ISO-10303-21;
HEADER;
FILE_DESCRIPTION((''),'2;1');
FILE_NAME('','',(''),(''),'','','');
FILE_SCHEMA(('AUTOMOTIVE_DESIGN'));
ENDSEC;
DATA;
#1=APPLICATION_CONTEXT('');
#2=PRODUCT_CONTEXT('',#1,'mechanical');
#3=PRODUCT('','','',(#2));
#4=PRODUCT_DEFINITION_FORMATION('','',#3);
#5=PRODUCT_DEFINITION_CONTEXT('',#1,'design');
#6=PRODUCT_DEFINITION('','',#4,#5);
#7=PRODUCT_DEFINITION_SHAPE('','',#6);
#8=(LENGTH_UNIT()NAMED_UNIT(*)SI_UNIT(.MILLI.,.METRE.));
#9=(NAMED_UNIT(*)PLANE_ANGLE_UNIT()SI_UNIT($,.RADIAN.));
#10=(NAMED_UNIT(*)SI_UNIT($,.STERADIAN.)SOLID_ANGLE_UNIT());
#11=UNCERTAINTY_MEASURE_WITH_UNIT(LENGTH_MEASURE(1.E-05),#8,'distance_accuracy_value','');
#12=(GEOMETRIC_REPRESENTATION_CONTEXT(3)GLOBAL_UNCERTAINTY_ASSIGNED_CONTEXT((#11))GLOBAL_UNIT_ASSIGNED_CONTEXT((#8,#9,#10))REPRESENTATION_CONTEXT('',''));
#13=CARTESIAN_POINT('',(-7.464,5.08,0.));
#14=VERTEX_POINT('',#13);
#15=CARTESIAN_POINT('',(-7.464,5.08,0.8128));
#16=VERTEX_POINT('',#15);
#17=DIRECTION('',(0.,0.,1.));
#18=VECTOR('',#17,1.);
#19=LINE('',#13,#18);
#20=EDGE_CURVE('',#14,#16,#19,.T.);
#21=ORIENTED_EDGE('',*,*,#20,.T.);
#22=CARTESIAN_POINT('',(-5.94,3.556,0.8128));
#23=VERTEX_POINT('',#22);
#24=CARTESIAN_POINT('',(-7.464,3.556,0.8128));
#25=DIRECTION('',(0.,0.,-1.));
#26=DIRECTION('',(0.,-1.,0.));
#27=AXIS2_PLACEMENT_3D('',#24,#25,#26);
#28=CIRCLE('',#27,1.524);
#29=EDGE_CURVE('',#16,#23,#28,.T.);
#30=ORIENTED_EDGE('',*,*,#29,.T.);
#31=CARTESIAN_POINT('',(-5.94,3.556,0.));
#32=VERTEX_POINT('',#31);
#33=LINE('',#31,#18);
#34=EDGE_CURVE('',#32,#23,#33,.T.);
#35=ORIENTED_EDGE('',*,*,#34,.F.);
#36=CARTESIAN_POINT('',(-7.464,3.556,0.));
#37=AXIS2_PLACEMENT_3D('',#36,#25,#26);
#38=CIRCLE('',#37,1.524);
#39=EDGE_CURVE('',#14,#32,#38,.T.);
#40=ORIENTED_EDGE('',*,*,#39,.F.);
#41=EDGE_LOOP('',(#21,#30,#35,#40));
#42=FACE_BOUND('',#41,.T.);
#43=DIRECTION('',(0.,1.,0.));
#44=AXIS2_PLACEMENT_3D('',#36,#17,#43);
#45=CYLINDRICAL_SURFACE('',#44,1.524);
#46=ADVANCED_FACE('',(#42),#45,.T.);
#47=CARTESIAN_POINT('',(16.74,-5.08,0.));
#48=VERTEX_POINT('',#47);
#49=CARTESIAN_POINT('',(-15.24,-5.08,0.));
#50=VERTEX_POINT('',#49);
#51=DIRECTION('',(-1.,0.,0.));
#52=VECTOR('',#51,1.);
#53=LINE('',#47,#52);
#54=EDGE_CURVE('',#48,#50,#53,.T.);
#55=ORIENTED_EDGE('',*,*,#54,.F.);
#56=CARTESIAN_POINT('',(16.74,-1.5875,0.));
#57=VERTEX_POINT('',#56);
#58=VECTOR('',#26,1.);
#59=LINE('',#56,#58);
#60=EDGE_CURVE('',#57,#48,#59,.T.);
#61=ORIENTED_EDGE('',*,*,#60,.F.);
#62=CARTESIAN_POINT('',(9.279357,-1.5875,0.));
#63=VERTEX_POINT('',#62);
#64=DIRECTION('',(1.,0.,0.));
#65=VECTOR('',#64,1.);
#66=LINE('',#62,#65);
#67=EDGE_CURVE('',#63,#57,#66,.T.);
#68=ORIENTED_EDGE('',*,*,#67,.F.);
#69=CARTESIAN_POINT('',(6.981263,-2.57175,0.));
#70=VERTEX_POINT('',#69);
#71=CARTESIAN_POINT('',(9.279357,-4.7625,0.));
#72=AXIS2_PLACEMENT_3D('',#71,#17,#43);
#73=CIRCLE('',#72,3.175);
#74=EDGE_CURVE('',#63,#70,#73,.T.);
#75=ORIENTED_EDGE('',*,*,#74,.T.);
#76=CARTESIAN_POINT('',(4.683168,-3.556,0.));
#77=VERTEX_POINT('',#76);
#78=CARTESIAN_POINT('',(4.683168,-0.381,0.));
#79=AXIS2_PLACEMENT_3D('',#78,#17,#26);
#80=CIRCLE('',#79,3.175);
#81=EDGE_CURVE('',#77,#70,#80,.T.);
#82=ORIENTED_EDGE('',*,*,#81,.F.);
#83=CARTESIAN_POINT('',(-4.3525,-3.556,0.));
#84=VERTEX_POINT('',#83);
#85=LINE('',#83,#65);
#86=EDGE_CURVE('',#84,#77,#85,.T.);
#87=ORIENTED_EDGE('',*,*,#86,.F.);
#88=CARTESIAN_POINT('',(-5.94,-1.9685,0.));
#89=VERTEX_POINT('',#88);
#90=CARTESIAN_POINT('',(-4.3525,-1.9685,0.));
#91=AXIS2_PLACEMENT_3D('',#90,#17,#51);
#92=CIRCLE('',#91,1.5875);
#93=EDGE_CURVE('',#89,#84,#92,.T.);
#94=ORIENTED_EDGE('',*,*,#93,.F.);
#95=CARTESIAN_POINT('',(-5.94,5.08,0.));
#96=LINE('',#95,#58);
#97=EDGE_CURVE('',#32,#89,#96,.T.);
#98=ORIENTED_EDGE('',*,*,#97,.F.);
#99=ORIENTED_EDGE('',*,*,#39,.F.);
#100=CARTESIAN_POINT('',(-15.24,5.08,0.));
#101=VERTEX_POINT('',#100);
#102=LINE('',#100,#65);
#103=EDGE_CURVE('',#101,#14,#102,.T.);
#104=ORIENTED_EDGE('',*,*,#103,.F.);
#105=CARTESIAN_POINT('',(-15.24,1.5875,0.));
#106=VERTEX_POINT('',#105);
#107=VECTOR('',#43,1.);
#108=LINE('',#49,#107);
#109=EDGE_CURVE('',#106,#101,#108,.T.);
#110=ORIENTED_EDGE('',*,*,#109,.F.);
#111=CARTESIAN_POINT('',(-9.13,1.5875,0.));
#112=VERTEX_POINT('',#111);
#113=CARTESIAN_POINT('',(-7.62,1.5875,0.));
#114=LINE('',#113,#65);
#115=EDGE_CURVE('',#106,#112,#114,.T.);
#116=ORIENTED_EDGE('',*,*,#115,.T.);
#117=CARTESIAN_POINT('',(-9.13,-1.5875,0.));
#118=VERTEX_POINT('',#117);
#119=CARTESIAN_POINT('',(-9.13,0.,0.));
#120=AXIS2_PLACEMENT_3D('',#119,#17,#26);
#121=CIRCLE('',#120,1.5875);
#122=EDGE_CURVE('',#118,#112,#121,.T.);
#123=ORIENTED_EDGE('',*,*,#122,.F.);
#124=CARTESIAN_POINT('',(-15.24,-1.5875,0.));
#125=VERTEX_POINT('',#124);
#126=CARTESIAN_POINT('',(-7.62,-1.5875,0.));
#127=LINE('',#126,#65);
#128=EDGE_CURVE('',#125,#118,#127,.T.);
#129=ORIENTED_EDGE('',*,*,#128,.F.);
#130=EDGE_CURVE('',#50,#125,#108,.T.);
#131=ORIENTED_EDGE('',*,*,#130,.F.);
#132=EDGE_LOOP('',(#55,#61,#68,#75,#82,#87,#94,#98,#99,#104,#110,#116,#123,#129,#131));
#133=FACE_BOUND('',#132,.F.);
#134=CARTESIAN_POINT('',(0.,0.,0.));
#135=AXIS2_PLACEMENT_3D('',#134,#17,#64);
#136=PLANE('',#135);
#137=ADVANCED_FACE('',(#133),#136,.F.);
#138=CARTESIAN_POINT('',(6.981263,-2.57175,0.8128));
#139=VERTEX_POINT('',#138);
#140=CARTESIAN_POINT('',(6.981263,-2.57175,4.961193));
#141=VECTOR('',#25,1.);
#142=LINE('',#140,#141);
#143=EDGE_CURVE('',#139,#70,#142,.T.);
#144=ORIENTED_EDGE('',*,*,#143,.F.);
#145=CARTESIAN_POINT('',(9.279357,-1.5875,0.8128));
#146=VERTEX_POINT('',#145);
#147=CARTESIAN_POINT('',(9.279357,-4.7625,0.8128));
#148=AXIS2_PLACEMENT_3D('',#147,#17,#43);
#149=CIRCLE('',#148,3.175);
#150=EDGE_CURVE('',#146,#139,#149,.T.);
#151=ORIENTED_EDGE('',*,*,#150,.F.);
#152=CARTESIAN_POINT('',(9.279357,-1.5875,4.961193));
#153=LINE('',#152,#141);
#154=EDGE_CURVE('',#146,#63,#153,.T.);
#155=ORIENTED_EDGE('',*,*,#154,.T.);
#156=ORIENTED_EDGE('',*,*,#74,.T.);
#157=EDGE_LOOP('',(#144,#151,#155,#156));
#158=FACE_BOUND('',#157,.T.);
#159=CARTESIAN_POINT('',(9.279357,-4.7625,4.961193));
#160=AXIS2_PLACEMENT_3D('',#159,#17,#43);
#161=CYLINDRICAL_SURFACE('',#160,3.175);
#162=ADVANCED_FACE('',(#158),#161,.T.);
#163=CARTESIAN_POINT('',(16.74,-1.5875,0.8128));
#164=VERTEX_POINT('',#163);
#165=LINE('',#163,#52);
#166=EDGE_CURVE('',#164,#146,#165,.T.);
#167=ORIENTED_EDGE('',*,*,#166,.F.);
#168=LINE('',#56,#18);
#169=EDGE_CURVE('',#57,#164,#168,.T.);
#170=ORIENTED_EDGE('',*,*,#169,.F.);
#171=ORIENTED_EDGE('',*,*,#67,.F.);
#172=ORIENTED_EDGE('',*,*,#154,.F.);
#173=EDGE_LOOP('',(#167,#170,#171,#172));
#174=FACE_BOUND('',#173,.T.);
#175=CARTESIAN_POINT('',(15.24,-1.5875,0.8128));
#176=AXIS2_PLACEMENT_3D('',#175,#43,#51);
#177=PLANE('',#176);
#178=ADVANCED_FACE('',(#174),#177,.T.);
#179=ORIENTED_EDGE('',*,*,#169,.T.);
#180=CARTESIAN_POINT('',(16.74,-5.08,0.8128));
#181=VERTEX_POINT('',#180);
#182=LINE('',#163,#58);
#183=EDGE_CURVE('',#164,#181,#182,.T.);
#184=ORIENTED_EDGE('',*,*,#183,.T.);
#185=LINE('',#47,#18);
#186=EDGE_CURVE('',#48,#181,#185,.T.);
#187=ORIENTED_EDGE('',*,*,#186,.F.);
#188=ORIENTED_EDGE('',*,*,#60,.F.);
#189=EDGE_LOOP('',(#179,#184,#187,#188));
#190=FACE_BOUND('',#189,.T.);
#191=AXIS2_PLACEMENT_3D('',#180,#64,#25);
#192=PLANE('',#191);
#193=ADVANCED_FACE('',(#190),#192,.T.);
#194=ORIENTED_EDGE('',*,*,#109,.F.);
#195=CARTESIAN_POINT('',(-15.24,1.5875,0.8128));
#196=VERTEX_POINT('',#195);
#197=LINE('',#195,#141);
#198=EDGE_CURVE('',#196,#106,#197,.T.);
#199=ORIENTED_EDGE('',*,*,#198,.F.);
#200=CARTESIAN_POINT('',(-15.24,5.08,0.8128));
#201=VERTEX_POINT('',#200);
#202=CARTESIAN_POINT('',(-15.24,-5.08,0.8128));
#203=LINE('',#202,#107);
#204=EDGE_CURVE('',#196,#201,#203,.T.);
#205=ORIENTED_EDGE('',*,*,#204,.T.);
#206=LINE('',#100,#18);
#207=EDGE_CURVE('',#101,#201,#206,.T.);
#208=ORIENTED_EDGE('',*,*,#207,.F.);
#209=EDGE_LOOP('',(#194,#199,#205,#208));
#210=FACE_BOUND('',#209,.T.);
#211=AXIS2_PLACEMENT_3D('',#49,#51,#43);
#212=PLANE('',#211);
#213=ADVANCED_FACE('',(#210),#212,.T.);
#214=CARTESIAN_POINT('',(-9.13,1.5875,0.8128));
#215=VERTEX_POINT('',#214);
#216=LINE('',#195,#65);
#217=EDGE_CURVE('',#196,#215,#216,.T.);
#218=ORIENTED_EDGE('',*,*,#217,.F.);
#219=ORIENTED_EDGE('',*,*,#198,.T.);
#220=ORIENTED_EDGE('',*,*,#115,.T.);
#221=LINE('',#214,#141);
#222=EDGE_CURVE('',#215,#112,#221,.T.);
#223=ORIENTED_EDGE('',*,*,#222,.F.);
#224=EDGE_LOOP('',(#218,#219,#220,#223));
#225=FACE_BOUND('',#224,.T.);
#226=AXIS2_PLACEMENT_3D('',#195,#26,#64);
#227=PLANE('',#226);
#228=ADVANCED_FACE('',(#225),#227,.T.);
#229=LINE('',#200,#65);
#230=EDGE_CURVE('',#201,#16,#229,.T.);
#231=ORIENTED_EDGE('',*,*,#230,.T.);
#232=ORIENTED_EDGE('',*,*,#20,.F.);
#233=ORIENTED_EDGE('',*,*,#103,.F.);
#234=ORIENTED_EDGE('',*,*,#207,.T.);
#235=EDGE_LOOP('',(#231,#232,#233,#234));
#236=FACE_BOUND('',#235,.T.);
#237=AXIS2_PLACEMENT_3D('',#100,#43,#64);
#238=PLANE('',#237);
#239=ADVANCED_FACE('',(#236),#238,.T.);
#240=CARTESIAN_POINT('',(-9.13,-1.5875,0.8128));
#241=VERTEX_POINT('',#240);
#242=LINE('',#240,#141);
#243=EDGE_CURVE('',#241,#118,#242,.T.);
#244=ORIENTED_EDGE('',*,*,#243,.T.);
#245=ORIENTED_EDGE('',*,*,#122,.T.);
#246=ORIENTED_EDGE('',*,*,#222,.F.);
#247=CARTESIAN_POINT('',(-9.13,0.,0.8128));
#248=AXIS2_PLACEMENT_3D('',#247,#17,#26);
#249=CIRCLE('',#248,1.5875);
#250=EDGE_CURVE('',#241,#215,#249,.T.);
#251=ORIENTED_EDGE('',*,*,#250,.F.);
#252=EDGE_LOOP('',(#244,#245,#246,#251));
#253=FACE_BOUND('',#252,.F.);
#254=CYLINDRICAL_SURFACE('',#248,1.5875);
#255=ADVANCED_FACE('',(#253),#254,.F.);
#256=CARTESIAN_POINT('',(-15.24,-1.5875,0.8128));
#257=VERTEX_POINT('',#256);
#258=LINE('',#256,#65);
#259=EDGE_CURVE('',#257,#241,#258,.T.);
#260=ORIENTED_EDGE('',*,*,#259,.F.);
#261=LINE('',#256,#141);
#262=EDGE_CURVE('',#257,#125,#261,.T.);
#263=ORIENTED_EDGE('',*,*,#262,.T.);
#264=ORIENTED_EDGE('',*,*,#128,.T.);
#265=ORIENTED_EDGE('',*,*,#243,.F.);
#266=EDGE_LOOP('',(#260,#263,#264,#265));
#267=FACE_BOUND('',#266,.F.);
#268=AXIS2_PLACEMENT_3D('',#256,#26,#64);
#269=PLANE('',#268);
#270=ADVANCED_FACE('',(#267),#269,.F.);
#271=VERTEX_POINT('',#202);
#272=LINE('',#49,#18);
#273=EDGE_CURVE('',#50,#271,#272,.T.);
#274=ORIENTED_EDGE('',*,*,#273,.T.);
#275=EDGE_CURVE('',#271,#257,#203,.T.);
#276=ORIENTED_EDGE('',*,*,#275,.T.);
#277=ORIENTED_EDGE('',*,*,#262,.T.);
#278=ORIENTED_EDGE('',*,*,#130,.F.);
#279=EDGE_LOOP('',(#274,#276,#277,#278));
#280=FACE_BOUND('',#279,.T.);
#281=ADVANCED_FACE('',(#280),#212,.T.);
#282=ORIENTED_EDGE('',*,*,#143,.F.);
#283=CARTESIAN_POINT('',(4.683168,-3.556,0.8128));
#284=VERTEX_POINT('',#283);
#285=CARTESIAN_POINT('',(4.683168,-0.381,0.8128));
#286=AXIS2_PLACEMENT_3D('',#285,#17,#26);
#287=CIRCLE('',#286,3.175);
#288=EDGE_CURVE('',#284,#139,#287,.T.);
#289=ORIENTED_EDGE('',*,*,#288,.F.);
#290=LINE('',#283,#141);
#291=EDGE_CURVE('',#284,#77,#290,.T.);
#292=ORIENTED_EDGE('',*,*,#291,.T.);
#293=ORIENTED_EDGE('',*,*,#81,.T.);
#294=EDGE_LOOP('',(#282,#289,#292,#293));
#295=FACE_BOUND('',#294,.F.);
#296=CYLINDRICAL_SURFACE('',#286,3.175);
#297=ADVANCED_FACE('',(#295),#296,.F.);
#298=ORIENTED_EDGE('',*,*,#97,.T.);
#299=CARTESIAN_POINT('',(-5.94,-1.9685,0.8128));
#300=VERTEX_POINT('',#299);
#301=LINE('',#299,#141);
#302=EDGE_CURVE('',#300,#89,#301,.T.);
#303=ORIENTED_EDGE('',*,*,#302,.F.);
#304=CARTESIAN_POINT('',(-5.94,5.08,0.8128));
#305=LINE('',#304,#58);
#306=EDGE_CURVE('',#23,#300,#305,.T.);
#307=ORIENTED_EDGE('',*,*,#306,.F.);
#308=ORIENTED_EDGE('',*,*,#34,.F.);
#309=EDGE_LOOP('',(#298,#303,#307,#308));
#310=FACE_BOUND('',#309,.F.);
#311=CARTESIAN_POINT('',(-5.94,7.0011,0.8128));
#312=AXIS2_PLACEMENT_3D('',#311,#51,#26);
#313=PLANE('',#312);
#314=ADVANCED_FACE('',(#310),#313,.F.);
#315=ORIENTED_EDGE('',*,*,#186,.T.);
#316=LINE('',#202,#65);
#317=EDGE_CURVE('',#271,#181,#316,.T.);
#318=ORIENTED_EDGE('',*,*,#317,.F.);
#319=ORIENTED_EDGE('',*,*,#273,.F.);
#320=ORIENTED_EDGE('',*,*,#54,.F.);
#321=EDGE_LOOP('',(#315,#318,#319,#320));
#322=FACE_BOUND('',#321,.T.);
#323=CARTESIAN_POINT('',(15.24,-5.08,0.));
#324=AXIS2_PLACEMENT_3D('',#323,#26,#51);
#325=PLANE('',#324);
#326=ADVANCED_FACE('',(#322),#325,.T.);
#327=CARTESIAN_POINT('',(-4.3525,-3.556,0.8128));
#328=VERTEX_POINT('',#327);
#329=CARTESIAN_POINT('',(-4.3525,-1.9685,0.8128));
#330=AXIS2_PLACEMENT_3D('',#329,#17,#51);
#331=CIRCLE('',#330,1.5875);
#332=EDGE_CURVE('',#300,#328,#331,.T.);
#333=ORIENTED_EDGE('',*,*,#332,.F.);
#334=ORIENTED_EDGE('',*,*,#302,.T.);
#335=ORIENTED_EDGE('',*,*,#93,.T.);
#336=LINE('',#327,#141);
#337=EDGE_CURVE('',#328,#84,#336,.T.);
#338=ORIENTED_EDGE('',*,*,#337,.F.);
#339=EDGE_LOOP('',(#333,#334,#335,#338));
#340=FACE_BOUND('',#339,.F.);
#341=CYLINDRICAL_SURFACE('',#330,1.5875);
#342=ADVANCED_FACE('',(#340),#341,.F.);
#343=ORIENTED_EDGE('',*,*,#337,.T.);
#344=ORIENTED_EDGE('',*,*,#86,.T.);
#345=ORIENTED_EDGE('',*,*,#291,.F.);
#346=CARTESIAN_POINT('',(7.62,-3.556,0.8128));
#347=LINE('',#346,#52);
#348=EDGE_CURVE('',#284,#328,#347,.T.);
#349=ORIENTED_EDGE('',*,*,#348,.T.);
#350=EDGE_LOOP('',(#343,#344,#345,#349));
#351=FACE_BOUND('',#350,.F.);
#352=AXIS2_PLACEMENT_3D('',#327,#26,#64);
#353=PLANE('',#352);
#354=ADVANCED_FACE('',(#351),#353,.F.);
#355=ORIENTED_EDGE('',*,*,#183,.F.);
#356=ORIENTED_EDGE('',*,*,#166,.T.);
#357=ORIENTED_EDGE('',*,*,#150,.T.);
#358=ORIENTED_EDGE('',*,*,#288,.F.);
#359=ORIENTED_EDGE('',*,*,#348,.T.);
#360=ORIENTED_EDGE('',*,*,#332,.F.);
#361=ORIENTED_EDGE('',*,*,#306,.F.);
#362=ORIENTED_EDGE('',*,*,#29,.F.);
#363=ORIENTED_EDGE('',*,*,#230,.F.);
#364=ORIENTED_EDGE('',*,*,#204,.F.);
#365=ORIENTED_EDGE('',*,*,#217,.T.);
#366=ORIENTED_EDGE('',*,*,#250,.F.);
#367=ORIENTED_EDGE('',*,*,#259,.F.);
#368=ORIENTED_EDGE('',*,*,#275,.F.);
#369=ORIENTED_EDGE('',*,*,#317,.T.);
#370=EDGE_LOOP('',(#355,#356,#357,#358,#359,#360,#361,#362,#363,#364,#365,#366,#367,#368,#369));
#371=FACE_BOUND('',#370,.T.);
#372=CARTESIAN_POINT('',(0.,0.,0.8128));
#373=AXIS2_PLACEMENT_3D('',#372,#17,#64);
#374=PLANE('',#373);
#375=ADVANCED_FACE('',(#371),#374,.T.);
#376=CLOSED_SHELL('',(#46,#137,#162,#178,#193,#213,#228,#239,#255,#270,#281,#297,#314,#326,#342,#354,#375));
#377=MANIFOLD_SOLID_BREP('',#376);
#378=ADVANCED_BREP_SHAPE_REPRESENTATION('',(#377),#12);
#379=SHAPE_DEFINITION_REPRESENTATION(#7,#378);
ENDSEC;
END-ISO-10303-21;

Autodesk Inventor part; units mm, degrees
ref_plane "YZ Plane" through (0, 0, 0) normal (1, 0, 0) x (0, 1, 0)
ref_plane "XZ Plane" through (0, 0, 0) normal (0, 1, 0) x (-1, 0, 0)
ref_plane "XY Plane" through (0, 0, 0) normal (0, 0, 1) x (1, 0, 0)
sketch "Sketch1" plane through (0, 0, 0) normal (0, 0, 1) x (1, 0, 0)
  line L0 (-15.24, 5.08) -> (15.24, 5.08)
  line L1 (15.24, 5.08) -> (15.24, -5.08)
  line L2 (15.24, -5.08) -> (-15.24, -5.08)
  line L3 (-15.24, -5.08) -> (-15.24, 5.08)
  point P0 (0, 0)
  point P1 (0, 5.08)
  point P2 (-15.24, 0)
  dimension "d0" = 30.48
  dimension "d1" = 10.16
extrude "Extrusion1" add sketch "Sketch1" along normal blind 0.8128
sketch "Sketch2" plane through (0, 0, 0.8128) normal (0, 0, 1) x (1, 0, 0)
  line L0 (15.24, 5.08) -> (15.24, -5.08) projected
  line L1 (-15.24, 5.08) -> (15.24, 5.08) projected
  line L2 (-15.24, -5.08) -> (-15.24, 5.08) projected
  line L3 (15.24, -5.08) -> (-15.24, -5.08) projected
  line L4 (-4.3525, 3.556) -> (2.3785, 3.556)
  line L5 (-4.3525, -3.556) -> (2.3785, -3.556)
  line L6 (-5.94, 1.9685) -> (-5.94, -1.9685)
  line L7 (3.966, 1.9685) -> (3.966, -1.9685)
  arc A0 (-4.3525, 3.556) -> (-5.94, 1.9685) centre (-4.3525, 1.9685) ccw
  arc A1 (-5.94, -1.9685) -> (-4.3525, -3.556) centre (-4.3525, -1.9685) ccw
  arc A2 (2.3785, -3.556) -> (3.966, -1.9685) centre (2.3785, -1.9685) ccw
  arc A3 (3.966, 1.9685) -> (2.3785, 3.556) centre (2.3785, 1.9685) ccw
  point P0 (-0.987, 3.556)
  point P1 (-0.987, -3.556)
  point P2 (-5.94, 0)
  point P3 (3.966, 0)
  dimension "d5" = 6.731
  dimension "d6" = 6.731
  dimension "d7" = 3.937
  dimension "d8" = 3.937
  dimension "d13" = 1.5875
  dimension "d14" = 1.5875
  dimension "d15" = 1.5875
  dimension "d16" = 1.5875
  dimension "d38" = 9.3
extrude "Extrusion2" cut sketch "Sketch2" against normal blind 25.4 contours L4 A3 L7 A2 L5 A1 L6 A0
sketch "Sketch3" plane through (0, 0, 0.8128) normal (0, 0, 1) x (1, 0, 0)
  arc A0 (-4.3525, 3.556) -> (-5.94, 1.9685) centre (-4.3525, 1.9685) ccw projected
  line L0 (-4.3525, 3.556) -> (2.3785, 3.556) projected
  arc A1 (3.966, 1.9685) -> (2.3785, 3.556) centre (2.3785, 1.9685) ccw projected
  line L1 (3.966, 1.9685) -> (3.966, -1.9685) projected
  arc A2 (2.3785, -3.556) -> (3.966, -1.9685) centre (2.3785, -1.9685) ccw projected
  line L2 (2.3785, -3.556) -> (-4.3525, -3.556) projected
  arc A3 (-5.94, -1.9685) -> (-4.3525, -3.556) centre (-4.3525, -1.9685) ccw projected
  line L3 (-5.94, -1.9685) -> (-5.94, 1.9685) projected
  line L4 (15.24, 5.08) -> (15.24, -5.08) projected
  line L5 (-15.24, 5.08) -> (15.24, 5.08) projected
  line L6 (-15.24, -5.08) -> (-15.24, 5.08) projected
  line L7 (15.24, -5.08) -> (-15.24, -5.08) projected
  line L8 (-15.24, 1.5875) -> (-9.13, 1.5875)
  line L9 (-15.24, -1.5875) -> (-9.13, -1.5875)
  arc A4 (-9.13, -1.5875) -> (-9.13, 1.5875) centre (-9.13, 0) ccw
  point P0 (0, 0)
  dimension "d20" = 3.4925
  dimension "d21" = 6.11
  dimension "d22" = 3.175
  dimension "d24" = 1.5875
extrude "Extrusion3" cut sketch "Sketch3" against normal blind 25.4 contours L8 A4 L9 L6
mirror "Mirror1" about plane through (0, 0, 0) normal (1, 0, 0) of "Extrusion3"
sketch "Sketch5" plane through (0, 0, 0.8128) normal (0, 0, 1) x (1, 0, 0)
  line L0 (3.966, 1.9685) -> (3.966, -1.9685) construction
  line L1 (-5.94, -1.9685) -> (3.966, -1.9685)
  line L2 (3.966, -1.9685) -> (3.966, 7.0011)
  line L3 (3.966, 7.0011) -> (-5.94, 7.0011)
  line L4 (-5.94, 7.0011) -> (-5.94, -1.9685)
  point P0 (0, 0)
extrude "Extrusion5" cut sketch "Sketch5" against normal through all
fillet "Fillet1" radius 1.524 2 edges at (-5.94, 5.08, 0.4064) (3.966, 5.08, 0.4064)
sketch "Sketch7" plane through (0, 0, 0.8128) normal (0, 0, 1) x (1, 0, 0)
  line L0 (9.13, -1.5875) -> (15.24, -1.5875) construction
  line L1 (15.24, -1.5875) -> (3.966, -1.5875)
  line L2 (3.966, -1.5875) -> (3.966, 5.08)
  line L3 (3.966, 5.08) -> (15.24, 5.08)
  line L4 (15.24, 5.08) -> (15.24, -1.5875)
  line L5 (3.966, 3.556) -> (3.966, -1.9685) projected
  point P0 (0, 0)
extrude "Extrusion6" cut sketch "Sketch7" against normal through all
sketch "Sketch8" plane through (0, 0, 0.8128) normal (0, 0, 1) x (1, 0, 0)
  line L0 (3.966, -1.5875) -> (15.24, -1.5875) projected
  arc A0 (2.3785, -3.556) -> (3.966, -1.9685) centre (2.3785, -1.9685) ccw projected
  line L1 (7.62, -1.5875) -> (2.3785, -1.5875)
  line L2 (2.3785, -1.5875) -> (2.3785, -3.556)
  line L3 (2.3785, -3.556) -> (7.62, -3.556)
  line L4 (7.62, -3.556) -> (7.62, -1.5875)
  line L5 (15.24, -1.5875) -> (15.24, -5.08) projected
  point P0 (0, 0)
  dimension "d34" = 7.62
extrude "Extrusion7" cut sketch "Sketch8" against normal through all
fillet "Fillet2" radius 3.175 2 edges at (7.62, -3.556, 0.4064) (7.62, -1.5875, 0.4064)
sketch "Sketch9" plane through (15.24, -5.08, 0.8128) normal (1, 0, 0) x (0, 0, -1)
  line L0 (0.8128, 3.4925) -> (0, 3.4925) projected
  line L1 (0, 3.4925) -> (0, 0) projected
  line L2 (0.8128, 0) -> (0, 0) projected
  line L3 (0.8128, 3.4925) -> (0.8128, 0) projected
  point P0 (0.8128, 5.08)
extrude "Extrusion8" add sketch "Sketch9" along normal blind 1.5
properties part number "HarveyHeadplate_LargerCenter_FrontAndSideCutout_WiderTeeth_Ver3"
